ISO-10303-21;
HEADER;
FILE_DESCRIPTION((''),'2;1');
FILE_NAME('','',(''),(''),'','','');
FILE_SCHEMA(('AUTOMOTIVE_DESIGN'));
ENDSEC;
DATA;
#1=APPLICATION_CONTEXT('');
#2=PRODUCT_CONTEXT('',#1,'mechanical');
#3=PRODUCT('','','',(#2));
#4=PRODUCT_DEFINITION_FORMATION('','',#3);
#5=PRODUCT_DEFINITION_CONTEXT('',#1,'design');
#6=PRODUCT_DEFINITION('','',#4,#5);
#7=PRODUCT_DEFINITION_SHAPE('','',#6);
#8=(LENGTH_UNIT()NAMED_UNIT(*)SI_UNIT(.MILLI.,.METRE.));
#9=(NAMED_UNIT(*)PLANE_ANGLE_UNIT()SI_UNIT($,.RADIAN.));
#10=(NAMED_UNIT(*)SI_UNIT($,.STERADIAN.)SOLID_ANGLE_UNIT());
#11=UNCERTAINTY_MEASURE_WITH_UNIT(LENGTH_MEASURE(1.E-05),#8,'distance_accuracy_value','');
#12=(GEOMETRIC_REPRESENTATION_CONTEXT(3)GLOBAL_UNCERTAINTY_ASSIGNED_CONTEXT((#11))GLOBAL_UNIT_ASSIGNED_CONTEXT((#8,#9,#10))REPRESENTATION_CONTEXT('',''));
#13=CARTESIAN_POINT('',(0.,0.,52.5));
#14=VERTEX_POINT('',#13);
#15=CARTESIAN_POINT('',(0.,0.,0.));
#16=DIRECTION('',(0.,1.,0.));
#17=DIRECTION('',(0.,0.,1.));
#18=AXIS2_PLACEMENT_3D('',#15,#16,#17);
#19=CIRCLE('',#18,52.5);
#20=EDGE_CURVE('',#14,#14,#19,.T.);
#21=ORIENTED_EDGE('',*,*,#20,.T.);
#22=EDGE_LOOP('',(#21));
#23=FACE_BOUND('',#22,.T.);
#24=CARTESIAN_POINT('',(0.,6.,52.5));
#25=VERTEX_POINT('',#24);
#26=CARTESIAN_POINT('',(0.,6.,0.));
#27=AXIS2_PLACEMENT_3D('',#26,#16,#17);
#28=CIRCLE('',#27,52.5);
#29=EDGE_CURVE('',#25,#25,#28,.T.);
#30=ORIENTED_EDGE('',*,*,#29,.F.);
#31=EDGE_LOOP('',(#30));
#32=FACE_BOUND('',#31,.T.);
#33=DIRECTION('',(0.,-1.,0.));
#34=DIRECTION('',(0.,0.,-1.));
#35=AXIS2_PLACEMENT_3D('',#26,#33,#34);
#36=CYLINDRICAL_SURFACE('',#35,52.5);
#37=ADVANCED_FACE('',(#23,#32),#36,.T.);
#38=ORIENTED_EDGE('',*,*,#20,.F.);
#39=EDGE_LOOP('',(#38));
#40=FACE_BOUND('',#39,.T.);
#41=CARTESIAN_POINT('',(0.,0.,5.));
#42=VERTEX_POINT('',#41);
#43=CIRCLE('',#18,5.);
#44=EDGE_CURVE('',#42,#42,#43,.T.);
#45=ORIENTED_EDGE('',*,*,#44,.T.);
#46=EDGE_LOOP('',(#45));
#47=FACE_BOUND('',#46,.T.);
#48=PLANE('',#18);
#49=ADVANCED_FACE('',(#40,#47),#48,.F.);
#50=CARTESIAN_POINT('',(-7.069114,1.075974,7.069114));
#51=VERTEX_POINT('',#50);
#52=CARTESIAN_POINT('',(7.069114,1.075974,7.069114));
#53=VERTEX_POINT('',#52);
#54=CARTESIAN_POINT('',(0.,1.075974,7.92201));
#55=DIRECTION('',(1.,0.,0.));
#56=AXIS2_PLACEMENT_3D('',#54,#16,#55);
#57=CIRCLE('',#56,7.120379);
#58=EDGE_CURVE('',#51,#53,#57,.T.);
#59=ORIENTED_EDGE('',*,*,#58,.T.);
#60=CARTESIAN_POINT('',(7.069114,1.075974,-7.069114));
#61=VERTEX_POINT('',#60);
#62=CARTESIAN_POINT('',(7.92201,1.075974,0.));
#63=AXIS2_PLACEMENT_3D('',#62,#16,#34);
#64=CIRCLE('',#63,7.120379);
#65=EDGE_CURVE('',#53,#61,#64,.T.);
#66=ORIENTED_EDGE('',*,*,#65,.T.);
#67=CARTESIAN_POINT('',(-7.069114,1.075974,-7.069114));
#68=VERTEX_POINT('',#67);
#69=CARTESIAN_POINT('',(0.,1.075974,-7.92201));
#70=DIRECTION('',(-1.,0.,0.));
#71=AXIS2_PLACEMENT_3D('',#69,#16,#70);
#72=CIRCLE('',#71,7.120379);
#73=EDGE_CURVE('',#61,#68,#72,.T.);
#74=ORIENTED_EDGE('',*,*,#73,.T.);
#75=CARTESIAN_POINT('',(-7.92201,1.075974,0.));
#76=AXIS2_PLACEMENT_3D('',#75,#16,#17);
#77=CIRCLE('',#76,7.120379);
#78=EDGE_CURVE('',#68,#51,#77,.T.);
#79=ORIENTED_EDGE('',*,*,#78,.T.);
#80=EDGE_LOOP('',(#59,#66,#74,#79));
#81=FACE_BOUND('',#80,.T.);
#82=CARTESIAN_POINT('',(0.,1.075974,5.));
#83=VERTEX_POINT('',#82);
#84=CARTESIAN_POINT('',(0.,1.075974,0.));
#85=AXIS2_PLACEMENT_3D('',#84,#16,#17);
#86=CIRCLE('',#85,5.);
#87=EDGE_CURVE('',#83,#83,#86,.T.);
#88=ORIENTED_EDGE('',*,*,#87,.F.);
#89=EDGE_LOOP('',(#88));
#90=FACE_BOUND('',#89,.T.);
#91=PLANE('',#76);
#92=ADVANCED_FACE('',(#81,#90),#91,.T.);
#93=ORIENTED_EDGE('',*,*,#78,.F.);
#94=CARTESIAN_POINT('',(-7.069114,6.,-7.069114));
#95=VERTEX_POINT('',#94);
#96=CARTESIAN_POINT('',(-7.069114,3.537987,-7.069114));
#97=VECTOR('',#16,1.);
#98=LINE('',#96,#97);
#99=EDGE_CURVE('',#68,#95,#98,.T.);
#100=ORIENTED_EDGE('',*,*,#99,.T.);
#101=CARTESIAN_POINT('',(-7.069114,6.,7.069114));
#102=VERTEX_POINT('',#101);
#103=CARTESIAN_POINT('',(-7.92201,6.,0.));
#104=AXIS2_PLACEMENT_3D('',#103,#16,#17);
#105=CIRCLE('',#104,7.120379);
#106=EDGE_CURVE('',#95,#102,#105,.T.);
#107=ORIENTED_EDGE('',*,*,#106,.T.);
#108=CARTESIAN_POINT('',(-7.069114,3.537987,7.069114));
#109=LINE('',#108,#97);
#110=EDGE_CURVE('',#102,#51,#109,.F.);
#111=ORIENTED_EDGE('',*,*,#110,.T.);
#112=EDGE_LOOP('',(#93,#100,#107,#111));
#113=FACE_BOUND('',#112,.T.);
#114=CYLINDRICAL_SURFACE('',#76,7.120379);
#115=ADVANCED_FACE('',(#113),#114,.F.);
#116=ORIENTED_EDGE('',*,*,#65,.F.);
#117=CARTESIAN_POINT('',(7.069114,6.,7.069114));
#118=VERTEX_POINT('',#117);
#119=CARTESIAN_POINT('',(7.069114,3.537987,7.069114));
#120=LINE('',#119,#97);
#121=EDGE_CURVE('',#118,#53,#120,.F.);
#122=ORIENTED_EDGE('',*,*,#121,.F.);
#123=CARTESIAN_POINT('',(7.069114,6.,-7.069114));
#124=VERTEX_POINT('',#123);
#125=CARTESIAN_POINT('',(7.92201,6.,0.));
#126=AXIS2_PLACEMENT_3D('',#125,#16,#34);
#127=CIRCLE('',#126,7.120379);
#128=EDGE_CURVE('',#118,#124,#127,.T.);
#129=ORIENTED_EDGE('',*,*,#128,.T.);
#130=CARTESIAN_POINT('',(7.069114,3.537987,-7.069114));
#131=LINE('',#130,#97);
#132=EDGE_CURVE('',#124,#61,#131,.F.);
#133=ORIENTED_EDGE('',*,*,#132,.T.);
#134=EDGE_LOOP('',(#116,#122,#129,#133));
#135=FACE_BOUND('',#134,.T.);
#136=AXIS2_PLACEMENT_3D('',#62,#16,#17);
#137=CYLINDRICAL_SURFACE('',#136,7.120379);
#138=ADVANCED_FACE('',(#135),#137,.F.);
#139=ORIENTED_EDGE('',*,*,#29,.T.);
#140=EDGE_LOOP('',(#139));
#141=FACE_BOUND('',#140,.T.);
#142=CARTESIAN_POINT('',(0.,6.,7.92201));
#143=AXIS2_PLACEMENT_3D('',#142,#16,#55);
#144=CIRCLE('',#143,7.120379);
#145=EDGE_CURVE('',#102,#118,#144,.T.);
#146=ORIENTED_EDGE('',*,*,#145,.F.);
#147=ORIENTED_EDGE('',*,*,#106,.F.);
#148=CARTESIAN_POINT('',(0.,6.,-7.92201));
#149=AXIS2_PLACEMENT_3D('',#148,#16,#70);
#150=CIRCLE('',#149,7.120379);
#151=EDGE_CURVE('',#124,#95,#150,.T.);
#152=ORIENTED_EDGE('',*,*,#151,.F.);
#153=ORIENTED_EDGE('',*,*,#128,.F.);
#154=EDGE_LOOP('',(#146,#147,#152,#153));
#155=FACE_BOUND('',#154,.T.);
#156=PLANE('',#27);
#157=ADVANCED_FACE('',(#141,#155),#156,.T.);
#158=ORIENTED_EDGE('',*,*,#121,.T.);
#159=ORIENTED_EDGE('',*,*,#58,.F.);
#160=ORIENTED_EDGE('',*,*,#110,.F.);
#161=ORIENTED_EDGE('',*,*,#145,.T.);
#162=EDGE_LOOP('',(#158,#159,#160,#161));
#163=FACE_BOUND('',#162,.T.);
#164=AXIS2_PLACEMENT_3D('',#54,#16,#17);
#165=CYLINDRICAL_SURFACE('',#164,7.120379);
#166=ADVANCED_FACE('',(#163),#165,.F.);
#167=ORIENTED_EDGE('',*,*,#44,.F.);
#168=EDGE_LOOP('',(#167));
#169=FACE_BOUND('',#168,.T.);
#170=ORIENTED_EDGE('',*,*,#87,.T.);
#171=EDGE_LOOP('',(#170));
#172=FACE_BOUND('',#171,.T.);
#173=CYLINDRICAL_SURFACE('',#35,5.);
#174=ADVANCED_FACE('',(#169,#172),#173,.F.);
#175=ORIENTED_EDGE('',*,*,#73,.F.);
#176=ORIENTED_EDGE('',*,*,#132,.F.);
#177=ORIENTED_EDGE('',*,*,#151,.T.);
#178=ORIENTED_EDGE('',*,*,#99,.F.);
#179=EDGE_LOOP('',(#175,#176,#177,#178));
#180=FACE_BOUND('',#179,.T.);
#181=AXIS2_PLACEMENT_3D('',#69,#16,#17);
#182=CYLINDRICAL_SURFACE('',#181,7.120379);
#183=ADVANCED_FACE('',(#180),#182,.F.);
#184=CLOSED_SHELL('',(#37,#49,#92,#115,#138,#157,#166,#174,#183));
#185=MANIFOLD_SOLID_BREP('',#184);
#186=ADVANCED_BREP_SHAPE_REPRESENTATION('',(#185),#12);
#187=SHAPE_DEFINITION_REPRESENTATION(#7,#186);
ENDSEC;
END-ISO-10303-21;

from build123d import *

# Parameters (mm, degrees)
SKETCH1_R           = 52.5
BOSS_EXTRUDE1_DEPTH = 6
SKETCH2_R           = 5
CUT_EXTRUDE1_DEPTH  = 75.488254108
SKETCH3_R           = 7.120379286
CUT_EXTRUDE2_DEPTH  = 4.924025576
CIRPATTERN1_COUNT   = 4


with BuildPart() as part:
    # Sketch1 → Boss-Extrude1 (new body)
    with BuildSketch(Plane(origin=(0, 0, 0), x_dir=(1, 0, 0), z_dir=(0, 1, 0))):
        Circle(SKETCH1_R)
    extrude(amount=BOSS_EXTRUDE1_DEPTH)

    # Sketch2 → Cut-Extrude1 (cut, through all)
    with BuildSketch(Plane(origin=(0, 0, 0), x_dir=(1, 0, 0), z_dir=(0, 1, 0))):
        Circle(SKETCH2_R)
    extrude(amount=CUT_EXTRUDE1_DEPTH, mode=Mode.SUBTRACT)

    # Sketch3 → Cut-Extrude2 (cut)
    with BuildSketch(Plane(origin=(0, 6, 0), x_dir=(1, 0, 0), z_dir=(0, 1, 0))):
        with Locations((-7.922010369, 0)):
            Circle(SKETCH3_R)
    cut_extrude2 = extrude(amount=-CUT_EXTRUDE2_DEPTH, mode=Mode.SUBTRACT)

    # CirPattern1: Cut-Extrude2 ×4 about axis
    cirpattern1_axis = Axis((0, 0, 0), (0, 1, 0))
    for i in range(1, CIRPATTERN1_COUNT):
        add(cut_extrude2.rotate(cirpattern1_axis, i * 360 / CIRPATTERN1_COUNT), mode=Mode.SUBTRACT)


solid = part.part
